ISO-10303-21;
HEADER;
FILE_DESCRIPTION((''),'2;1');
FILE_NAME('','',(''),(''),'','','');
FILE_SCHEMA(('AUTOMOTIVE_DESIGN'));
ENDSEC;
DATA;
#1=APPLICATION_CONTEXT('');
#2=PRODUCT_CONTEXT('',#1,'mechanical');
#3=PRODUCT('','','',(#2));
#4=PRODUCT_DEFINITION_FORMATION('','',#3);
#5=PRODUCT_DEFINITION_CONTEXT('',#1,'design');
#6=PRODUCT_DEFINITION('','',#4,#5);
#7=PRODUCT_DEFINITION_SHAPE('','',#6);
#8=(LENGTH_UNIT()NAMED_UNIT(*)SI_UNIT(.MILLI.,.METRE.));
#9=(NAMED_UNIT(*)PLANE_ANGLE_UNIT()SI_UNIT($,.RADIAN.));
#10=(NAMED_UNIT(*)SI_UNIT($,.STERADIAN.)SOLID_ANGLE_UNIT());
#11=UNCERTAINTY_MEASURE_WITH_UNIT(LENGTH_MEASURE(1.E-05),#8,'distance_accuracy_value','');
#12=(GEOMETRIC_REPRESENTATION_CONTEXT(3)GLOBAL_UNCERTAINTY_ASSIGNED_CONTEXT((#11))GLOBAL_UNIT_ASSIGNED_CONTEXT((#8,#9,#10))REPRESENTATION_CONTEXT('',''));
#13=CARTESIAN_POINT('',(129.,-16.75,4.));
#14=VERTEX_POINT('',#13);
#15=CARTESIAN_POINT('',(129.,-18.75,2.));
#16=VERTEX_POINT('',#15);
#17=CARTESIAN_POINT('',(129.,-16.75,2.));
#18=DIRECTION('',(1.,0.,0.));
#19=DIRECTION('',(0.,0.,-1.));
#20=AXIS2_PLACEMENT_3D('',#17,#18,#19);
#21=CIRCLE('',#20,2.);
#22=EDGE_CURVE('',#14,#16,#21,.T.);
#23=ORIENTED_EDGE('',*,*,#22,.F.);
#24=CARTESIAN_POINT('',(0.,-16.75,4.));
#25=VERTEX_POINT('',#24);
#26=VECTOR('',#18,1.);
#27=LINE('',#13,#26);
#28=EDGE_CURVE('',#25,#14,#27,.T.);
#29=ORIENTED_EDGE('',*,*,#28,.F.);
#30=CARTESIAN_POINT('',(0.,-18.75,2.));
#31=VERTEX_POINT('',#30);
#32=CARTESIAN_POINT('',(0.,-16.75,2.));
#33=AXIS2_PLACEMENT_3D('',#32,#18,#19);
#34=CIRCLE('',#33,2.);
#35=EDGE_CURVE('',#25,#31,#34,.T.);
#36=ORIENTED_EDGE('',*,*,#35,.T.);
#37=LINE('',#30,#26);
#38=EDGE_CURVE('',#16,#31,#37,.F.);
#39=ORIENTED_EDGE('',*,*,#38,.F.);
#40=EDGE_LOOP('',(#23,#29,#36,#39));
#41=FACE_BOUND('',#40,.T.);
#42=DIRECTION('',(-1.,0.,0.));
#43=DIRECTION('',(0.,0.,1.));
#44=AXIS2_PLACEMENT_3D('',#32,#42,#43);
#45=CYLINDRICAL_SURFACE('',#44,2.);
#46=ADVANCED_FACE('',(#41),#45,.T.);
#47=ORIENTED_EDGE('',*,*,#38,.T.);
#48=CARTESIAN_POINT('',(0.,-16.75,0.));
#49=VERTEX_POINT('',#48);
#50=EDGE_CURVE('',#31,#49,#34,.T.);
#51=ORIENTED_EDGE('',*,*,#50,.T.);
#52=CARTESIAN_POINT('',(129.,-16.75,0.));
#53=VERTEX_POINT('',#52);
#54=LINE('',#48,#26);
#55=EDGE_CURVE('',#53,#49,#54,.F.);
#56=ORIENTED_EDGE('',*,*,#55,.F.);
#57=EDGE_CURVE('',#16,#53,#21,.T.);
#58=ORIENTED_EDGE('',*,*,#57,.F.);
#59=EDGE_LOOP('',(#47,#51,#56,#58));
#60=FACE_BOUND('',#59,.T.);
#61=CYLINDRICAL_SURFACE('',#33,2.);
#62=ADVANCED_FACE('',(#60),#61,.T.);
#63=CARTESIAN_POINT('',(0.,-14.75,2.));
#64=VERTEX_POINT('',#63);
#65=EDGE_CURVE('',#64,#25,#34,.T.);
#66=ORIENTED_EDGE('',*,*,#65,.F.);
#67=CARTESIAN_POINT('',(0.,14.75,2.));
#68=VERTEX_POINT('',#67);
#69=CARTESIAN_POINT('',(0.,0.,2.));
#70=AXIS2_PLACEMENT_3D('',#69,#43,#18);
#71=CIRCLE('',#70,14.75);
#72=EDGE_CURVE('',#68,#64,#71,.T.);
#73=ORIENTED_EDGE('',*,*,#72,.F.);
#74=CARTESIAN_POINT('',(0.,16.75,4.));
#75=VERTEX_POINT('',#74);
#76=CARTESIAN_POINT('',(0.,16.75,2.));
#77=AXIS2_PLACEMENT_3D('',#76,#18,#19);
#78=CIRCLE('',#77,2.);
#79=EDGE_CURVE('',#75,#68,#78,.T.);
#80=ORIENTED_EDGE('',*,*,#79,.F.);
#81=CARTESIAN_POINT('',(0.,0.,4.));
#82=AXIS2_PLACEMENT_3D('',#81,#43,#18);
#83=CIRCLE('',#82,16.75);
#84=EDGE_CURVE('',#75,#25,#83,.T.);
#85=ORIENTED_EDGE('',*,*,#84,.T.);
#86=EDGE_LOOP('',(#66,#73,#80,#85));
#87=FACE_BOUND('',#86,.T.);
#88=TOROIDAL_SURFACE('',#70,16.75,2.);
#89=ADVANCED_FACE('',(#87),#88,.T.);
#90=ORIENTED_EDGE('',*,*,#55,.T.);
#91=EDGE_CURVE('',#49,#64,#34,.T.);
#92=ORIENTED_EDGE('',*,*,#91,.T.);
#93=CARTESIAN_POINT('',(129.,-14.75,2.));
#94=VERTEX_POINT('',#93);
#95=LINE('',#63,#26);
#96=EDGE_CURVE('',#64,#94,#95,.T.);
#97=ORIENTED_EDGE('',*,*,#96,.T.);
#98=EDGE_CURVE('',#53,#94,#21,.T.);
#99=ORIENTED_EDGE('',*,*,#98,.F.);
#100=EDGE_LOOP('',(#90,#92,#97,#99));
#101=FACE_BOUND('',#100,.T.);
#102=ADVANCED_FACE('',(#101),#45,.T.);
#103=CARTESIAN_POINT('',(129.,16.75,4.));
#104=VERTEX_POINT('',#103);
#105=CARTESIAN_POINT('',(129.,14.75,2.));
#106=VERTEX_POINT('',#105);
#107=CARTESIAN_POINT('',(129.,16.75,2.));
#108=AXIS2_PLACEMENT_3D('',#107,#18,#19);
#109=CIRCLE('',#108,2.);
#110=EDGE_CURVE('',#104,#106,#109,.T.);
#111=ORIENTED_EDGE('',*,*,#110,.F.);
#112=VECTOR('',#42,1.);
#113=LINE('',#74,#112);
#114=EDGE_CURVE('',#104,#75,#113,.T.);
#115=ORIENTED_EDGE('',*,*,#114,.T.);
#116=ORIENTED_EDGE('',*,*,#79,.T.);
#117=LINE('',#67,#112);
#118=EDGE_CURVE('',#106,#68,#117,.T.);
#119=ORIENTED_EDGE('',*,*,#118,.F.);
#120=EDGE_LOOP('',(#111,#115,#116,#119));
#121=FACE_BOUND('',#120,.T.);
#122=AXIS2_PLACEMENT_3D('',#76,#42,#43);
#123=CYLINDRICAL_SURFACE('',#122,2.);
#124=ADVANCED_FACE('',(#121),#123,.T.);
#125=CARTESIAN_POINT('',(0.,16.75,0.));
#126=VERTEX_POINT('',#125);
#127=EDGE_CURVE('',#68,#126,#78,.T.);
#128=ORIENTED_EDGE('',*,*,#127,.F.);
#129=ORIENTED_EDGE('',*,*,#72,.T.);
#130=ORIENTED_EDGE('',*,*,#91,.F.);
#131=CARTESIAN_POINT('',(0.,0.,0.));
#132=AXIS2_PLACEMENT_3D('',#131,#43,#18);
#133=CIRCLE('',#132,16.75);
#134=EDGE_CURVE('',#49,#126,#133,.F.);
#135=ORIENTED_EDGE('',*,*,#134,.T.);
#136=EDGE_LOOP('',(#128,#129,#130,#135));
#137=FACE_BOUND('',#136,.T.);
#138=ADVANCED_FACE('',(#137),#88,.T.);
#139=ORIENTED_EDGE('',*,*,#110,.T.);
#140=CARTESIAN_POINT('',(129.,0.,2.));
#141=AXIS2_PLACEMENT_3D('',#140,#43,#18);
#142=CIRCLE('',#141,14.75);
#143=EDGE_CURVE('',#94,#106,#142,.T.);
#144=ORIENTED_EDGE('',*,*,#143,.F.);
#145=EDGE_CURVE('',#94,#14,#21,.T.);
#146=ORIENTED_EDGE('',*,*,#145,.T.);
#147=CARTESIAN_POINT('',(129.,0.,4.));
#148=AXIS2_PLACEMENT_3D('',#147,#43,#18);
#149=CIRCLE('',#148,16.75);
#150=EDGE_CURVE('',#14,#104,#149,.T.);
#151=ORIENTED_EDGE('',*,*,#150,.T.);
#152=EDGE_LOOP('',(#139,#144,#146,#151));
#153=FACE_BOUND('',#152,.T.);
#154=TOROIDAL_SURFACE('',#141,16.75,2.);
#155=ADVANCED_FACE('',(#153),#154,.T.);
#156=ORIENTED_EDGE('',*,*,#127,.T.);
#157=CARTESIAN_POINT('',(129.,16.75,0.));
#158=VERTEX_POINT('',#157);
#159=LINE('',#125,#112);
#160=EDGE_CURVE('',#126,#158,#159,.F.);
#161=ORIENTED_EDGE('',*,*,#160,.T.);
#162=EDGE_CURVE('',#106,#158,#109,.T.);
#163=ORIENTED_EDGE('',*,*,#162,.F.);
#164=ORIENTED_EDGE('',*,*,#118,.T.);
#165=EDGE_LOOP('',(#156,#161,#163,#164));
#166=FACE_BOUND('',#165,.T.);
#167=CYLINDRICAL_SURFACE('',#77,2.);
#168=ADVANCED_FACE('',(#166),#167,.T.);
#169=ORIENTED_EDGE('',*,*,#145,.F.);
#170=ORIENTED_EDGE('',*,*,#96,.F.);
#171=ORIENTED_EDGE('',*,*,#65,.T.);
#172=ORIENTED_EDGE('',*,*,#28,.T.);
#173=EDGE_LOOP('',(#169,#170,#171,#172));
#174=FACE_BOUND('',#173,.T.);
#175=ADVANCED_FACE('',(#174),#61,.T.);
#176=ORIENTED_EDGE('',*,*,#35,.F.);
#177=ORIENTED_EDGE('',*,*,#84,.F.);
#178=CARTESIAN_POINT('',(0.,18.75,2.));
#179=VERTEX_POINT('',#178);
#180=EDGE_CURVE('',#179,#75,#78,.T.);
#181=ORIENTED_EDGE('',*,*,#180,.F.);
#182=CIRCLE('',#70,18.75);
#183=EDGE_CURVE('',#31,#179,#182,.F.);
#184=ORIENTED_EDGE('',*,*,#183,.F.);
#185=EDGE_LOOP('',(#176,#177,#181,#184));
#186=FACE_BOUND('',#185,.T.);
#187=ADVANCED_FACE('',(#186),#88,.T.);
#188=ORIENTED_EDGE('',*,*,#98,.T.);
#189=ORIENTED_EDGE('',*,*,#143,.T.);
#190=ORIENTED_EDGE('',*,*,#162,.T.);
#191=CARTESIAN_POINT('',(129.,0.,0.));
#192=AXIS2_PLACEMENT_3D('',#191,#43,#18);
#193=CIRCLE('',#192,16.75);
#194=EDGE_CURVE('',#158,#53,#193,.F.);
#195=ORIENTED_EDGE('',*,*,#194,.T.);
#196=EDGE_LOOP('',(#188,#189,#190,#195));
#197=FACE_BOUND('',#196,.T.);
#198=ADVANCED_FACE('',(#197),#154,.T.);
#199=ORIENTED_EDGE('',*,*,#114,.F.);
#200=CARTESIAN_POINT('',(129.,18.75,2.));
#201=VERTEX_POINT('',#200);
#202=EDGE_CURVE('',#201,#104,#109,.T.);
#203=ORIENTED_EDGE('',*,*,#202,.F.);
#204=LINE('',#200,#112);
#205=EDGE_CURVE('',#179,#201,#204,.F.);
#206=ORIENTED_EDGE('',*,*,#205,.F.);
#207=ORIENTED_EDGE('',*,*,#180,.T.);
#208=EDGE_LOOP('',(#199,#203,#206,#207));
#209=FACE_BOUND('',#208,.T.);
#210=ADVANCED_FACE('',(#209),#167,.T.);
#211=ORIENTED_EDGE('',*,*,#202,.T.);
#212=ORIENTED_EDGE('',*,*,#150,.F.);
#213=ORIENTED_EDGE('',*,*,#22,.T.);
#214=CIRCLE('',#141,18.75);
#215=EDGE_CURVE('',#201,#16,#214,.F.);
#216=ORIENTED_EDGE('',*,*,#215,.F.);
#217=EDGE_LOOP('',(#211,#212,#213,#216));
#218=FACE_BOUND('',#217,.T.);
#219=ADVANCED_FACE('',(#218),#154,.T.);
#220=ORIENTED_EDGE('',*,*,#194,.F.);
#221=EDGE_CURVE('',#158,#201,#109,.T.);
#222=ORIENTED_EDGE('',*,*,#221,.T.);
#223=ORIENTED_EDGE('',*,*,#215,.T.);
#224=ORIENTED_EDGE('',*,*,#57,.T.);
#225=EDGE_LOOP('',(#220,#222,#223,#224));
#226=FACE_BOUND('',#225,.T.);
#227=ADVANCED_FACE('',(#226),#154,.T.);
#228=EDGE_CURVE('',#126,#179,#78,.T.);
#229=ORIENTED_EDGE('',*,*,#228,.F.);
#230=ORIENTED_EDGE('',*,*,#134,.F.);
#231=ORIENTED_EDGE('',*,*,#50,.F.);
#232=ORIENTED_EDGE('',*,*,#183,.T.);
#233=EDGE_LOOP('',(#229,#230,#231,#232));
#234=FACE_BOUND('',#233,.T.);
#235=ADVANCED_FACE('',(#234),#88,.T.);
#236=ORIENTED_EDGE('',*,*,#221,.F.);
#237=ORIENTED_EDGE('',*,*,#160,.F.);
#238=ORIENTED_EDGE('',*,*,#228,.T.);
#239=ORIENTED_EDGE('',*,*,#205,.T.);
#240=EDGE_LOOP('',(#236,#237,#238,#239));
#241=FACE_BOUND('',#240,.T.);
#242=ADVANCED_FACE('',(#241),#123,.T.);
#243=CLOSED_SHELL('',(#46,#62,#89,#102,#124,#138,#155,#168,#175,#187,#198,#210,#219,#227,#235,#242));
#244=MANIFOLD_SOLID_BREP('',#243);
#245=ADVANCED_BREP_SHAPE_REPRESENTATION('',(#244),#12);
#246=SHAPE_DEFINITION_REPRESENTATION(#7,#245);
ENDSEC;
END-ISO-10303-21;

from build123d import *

# Parameters (mm, degrees)
BOSS_EXTRU_1_DEPTH = 4
CONG_1_R           = 2


with BuildPart() as part:
    # Esquisse1 → Boss.-Extru.1 (new body)
    with BuildSketch(Plane.XY):
        with BuildLine():
            Line((0, 18.75), (129, 18.75))
            ThreePointArc((129, 18.75), (147.75, 0), (129, -18.75))
            Line((129, -18.75), (0, -18.75))
            ThreePointArc((0, -18.75), (-18.75, 0), (0, 18.75))
        make_face()
        with BuildLine():
            Line((0, 14.75), (129, 14.75))
            ThreePointArc((129, 14.75), (143.75, 0), (129, -14.75))
            Line((129, -14.75), (0, -14.75))
            ThreePointArc((0, -14.75), (-14.75, 0), (0, 14.75))
        make_face(mode=Mode.SUBTRACT)
    extrude(amount=BOSS_EXTRU_1_DEPTH)

    # Congé1
    cong_1_edges = [part.edges().sort_by_distance(p)[0] for p in [
        (143.75, 0, 0),
        (64.5, -14.75, 0),
        (-14.75, 0, 0),
        (147.75, 0, 0),
        (64.5, -18.75, 0),
        (-18.75, 0, 0),
        (143.75, 0, 4),
        (64.5, -14.75, 4),
        (-14.75, 0, 4),
        (147.75, 0, 4),
        (64.5, -18.75, 4),
        (-18.75, 0, 4),
        (64.5, 14.75, 0),
        (64.5, 18.75, 0),
        (64.5, 14.75, 4),
        (64.5, 18.75, 4),
    ]]
    fillet(cong_1_edges, radius=CONG_1_R - 0.0001)  # a hair under: the kernel refuses the full size


solid = part.part
